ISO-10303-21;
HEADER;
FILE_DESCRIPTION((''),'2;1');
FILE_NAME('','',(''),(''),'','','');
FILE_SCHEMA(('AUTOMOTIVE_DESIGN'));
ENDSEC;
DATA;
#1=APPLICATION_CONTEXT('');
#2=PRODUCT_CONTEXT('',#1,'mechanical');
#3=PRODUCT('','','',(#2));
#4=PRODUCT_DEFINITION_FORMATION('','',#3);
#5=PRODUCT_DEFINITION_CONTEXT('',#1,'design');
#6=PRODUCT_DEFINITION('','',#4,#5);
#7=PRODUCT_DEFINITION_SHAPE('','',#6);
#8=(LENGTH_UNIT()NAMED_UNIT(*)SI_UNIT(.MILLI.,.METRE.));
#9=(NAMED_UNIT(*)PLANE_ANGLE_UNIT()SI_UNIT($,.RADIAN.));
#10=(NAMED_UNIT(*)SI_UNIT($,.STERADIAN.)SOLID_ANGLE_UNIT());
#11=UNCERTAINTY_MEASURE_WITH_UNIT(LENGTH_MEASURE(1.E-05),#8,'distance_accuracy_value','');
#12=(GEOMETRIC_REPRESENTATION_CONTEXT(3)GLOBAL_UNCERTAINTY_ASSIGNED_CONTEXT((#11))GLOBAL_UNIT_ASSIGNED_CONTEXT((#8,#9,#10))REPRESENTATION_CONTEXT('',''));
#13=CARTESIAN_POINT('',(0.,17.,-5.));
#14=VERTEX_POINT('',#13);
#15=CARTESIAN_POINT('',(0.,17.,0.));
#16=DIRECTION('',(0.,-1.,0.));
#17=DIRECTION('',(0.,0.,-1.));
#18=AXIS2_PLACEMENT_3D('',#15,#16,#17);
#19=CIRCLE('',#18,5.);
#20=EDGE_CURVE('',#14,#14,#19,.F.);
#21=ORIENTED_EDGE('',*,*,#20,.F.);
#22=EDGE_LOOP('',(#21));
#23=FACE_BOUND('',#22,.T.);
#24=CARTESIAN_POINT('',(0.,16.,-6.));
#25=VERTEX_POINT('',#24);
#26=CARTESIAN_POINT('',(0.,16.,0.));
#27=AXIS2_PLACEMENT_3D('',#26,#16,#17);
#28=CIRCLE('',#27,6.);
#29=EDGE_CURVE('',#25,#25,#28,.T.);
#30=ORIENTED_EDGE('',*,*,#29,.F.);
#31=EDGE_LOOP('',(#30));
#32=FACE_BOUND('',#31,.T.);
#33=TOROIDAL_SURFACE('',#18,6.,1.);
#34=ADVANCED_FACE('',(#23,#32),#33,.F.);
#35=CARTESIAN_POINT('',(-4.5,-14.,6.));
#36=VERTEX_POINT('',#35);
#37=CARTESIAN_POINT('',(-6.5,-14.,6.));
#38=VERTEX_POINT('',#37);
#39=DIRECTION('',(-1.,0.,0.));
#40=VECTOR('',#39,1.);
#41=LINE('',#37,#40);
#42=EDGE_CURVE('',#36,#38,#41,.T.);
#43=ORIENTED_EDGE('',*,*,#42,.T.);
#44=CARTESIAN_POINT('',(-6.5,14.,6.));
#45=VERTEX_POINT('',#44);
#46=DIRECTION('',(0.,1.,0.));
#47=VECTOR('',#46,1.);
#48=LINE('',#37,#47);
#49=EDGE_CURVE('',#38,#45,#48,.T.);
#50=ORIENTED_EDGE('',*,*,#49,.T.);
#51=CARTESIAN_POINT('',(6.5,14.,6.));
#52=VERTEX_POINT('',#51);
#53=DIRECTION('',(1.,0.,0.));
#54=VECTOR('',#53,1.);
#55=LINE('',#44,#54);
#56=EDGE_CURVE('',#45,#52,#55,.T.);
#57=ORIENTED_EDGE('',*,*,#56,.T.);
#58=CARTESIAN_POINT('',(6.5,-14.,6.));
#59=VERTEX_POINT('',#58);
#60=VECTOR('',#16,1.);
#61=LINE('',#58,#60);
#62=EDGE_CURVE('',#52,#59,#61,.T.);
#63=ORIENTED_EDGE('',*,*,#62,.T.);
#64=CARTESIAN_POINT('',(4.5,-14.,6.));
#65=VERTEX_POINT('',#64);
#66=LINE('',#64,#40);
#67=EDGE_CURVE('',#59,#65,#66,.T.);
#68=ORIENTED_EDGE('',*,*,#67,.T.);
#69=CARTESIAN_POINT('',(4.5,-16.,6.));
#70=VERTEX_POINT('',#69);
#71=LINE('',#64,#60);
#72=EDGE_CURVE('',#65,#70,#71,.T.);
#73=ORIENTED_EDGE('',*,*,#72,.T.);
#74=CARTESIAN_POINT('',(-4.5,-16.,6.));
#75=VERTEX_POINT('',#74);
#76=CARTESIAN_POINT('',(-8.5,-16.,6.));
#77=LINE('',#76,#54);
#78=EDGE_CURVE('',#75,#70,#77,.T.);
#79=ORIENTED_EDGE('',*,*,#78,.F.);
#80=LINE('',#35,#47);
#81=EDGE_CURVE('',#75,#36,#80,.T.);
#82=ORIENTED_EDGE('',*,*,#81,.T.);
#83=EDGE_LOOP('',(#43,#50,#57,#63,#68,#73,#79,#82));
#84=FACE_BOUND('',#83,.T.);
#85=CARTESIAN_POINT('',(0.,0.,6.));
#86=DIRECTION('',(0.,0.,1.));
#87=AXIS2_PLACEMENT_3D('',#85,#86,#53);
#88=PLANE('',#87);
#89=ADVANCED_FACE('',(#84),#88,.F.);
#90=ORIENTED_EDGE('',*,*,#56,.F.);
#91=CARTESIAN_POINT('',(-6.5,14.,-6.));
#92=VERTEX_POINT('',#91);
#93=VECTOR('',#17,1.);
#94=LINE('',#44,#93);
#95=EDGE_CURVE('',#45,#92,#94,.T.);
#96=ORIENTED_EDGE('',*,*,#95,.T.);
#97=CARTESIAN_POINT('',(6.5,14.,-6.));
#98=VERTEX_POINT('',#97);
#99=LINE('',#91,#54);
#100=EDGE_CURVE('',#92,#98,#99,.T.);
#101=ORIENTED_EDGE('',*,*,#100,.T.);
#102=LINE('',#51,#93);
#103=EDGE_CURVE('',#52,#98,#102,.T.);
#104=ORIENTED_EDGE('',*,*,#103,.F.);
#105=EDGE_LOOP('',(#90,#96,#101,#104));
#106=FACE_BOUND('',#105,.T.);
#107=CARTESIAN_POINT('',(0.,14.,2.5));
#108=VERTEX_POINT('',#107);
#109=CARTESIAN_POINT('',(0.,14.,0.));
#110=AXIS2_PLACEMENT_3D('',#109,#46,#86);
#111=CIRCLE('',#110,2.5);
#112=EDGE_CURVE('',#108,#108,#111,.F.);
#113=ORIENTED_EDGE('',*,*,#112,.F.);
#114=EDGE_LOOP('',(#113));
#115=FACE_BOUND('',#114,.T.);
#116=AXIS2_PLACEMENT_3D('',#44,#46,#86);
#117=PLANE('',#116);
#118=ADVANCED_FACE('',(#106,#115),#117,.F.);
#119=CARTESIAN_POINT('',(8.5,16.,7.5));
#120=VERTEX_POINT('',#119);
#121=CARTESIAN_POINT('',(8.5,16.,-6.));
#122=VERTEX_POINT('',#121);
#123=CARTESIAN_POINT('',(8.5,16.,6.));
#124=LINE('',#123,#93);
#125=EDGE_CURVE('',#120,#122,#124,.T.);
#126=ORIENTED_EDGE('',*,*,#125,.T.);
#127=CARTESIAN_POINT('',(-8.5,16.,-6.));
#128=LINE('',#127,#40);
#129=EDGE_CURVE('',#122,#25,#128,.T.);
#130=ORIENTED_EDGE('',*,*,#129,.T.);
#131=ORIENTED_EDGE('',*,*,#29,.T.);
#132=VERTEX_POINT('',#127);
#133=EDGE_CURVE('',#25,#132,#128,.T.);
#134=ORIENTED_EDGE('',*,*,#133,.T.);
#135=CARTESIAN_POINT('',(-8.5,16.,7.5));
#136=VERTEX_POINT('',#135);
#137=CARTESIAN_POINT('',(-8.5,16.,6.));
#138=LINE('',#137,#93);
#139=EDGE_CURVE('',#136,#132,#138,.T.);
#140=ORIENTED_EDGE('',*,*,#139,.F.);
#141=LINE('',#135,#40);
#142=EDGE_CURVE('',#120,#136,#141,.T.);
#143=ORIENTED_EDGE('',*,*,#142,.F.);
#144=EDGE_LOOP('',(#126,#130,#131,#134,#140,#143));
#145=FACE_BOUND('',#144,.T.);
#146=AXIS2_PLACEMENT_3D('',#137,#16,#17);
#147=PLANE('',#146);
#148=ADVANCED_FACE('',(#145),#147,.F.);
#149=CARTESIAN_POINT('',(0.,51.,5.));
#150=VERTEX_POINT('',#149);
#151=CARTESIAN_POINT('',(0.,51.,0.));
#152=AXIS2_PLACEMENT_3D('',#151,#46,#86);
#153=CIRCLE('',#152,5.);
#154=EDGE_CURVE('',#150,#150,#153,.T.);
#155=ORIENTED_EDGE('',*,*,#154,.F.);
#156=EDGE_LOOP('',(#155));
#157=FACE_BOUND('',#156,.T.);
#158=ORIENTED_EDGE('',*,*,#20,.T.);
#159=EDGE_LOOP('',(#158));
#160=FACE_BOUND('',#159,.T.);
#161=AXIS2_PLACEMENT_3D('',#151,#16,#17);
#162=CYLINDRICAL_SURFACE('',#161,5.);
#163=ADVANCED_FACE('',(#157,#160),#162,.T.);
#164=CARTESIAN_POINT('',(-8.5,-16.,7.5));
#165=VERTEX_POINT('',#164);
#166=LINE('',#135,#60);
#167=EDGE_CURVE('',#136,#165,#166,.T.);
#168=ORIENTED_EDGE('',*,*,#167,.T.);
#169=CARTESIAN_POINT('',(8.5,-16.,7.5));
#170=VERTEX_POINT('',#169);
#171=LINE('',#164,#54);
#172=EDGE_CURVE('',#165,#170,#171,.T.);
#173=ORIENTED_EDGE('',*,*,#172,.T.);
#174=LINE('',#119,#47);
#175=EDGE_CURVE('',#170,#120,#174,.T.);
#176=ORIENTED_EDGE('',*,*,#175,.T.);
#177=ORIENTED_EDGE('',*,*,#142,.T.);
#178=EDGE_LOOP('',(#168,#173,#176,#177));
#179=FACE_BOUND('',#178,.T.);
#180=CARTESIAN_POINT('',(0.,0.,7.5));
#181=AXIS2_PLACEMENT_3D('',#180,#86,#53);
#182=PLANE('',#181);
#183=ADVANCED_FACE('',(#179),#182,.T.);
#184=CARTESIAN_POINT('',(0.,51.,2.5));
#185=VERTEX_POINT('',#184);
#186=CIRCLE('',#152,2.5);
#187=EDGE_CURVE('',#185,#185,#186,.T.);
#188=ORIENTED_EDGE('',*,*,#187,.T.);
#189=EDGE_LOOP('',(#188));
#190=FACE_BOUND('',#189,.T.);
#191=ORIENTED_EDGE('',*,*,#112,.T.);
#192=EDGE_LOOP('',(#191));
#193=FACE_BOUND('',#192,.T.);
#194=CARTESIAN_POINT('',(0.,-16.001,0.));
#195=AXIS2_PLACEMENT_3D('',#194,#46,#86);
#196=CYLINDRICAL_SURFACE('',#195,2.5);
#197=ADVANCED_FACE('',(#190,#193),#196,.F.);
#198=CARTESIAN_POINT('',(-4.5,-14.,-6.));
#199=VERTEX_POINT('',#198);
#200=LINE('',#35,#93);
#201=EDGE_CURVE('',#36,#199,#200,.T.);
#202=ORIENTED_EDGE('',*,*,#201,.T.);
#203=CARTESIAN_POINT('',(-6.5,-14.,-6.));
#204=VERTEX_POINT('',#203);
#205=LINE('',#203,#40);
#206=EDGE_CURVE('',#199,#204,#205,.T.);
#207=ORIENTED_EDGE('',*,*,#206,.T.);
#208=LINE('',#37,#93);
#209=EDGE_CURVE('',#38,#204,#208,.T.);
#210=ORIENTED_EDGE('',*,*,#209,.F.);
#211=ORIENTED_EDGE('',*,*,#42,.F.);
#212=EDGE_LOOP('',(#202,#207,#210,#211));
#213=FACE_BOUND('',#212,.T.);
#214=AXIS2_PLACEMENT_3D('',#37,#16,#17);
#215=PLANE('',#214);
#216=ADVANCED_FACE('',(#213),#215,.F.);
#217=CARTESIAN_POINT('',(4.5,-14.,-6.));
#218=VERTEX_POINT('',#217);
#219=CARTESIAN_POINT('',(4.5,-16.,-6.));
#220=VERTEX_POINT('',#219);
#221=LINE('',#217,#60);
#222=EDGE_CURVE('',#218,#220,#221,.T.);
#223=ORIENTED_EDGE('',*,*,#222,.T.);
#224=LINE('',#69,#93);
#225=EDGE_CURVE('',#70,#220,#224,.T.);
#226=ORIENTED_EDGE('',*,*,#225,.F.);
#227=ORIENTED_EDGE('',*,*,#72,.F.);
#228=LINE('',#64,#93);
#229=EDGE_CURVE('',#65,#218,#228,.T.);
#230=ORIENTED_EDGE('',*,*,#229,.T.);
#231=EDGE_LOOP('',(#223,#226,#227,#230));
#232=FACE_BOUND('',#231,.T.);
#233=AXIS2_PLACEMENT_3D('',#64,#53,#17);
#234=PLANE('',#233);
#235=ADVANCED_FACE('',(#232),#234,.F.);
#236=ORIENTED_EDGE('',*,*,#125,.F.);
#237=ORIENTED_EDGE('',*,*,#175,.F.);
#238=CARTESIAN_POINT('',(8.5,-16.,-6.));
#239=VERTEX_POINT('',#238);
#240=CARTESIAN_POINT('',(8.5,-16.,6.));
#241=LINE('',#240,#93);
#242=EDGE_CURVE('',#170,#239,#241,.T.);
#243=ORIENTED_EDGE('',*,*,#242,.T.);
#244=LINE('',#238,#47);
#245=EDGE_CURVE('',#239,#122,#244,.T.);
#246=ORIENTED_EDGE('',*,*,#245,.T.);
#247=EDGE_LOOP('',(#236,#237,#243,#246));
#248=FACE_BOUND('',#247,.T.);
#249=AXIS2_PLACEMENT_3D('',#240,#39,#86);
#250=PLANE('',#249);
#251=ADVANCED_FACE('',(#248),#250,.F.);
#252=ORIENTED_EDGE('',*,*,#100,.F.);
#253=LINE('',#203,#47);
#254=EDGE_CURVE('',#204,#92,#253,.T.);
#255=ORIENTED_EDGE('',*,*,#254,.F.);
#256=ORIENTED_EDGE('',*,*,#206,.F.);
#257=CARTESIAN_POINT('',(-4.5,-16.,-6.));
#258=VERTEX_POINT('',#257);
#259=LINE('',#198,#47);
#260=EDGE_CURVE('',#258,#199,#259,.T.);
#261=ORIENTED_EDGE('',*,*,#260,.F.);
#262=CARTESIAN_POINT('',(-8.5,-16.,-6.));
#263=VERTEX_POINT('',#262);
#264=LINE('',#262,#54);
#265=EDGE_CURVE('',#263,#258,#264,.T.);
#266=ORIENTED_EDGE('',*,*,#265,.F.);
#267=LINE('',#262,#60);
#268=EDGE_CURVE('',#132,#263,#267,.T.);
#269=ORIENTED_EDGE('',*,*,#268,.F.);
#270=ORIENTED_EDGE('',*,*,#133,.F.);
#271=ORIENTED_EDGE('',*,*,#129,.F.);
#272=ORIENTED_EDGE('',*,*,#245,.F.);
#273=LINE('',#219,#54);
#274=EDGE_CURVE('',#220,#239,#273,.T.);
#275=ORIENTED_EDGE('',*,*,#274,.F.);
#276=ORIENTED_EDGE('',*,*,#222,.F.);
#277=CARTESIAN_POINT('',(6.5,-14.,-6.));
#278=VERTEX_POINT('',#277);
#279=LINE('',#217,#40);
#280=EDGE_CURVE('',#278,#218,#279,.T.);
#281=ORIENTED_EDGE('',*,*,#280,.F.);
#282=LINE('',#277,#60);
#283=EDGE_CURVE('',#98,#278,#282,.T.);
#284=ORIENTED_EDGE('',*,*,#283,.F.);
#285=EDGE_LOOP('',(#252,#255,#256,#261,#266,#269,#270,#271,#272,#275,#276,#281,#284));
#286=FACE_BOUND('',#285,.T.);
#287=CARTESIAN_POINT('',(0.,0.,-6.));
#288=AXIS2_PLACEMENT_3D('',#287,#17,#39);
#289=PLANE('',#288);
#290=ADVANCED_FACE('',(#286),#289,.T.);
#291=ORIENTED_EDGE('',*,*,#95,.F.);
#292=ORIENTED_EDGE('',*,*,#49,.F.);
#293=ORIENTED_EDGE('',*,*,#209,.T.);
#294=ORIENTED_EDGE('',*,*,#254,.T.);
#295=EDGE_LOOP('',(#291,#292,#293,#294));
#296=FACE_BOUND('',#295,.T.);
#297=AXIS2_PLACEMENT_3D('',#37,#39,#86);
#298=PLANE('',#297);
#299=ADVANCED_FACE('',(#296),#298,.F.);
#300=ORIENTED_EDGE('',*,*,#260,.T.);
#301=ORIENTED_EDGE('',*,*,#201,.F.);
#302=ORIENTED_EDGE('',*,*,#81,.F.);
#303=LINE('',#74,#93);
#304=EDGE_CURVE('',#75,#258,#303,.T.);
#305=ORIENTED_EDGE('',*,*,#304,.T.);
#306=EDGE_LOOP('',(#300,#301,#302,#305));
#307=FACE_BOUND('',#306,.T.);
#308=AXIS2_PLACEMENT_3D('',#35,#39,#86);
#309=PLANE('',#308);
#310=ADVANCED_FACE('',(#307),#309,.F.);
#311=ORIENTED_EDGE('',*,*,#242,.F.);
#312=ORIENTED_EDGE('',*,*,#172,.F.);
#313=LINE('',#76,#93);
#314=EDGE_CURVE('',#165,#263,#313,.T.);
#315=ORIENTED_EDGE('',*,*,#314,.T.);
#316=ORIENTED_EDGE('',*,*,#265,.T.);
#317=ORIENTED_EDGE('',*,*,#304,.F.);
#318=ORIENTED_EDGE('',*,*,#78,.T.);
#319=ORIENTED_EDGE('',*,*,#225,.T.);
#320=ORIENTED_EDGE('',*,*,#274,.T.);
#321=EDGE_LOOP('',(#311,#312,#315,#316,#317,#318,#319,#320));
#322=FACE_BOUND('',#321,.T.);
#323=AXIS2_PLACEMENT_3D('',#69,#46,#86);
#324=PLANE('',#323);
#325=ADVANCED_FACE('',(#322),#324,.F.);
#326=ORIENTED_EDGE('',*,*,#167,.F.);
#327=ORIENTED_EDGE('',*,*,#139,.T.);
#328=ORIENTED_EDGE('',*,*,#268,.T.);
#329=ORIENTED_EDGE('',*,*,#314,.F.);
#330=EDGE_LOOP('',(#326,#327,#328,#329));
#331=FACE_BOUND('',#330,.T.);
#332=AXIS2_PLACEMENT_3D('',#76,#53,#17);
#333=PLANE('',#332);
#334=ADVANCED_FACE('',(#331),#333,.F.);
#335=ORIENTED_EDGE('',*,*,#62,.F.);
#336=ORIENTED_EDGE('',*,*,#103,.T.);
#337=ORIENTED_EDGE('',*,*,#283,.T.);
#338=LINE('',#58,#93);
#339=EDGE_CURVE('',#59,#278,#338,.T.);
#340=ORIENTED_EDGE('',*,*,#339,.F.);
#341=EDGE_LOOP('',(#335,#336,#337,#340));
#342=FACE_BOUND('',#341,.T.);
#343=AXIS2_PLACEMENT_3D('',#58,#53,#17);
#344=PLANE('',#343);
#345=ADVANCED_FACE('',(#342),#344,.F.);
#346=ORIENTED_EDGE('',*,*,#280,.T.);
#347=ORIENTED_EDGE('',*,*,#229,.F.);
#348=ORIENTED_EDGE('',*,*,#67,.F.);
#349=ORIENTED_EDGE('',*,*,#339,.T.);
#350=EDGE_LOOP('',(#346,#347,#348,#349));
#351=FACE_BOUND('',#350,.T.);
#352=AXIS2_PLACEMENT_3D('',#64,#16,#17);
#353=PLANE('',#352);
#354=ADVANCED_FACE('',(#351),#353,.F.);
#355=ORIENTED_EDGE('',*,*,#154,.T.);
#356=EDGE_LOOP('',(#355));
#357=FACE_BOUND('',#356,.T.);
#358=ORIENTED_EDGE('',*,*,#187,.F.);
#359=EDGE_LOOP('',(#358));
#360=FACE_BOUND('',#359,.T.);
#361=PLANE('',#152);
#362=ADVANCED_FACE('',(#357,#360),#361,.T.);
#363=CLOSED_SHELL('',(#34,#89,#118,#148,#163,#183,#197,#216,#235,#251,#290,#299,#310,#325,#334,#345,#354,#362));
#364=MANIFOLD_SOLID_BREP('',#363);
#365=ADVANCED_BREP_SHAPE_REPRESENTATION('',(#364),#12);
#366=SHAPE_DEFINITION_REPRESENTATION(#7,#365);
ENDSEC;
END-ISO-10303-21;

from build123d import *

# Parameters (mm, degrees)
BOSS_EXTRUDE1_DEPTH = 6
SKETCH2_R           = 5
BOSS_EXTRUDE2_DEPTH = 35
FILLET1_R           = 1
SKETCH3_W           = 17
SKETCH3_H           = 32
BOSS_EXTRUDE3_DEPTH = 1.5
CUT_EXTRUDE1_REACH  = 69.952
SKETCH4_R           = 2.5


with BuildPart() as part:
    # Sketch1 → Boss-Extrude1 (new, symmetric)
    with BuildSketch(Plane.XY):
        Polygon((-6.5, -14), (-6.5, 14), (6.5, 14), (6.5, -14), (4.5, -14), (4.5, -16), (8.5, -16), (8.5, 16), (-8.5, 16), (-8.5, -16), (-4.5, -16), (-4.5, -14), align=None)
    extrude(amount=BOSS_EXTRUDE1_DEPTH, both=True)

    # Sketch2 → Boss-Extrude2 (add)
    with BuildSketch(Plane(origin=(0, 16, 0), x_dir=(1, 0, 0), z_dir=(0, 1, 0))):
        with Locations(Location((0, 0, 0), (0, 0, 270))):
            Circle(SKETCH2_R)
    extrude(amount=BOSS_EXTRUDE2_DEPTH)

    # Fillet1
    fillet1_edges = [part.edges().sort_by_distance(p)[0] for p in [
        (0, 16, -5),
    ]]
    fillet(fillet1_edges, radius=FILLET1_R - 0.0001)  # a hair under: the kernel refuses the full size

    # Sketch3 → Boss-Extrude3 (add)
    with BuildSketch(Plane.XY.offset(6)):
        Rectangle(SKETCH3_W, SKETCH3_H)
    extrude(amount=BOSS_EXTRUDE3_DEPTH)

    # Sketch4 → Cut-Extrude1 (cut, up to next)
    with BuildSketch(Plane(origin=(0, 51, 0), x_dir=(1, 0, 0), z_dir=(0, 1, 0)), mode=Mode.PRIVATE) as cut_extrude1_sk1:
        with Locations(Location((0, 0, 0), (0, 0, 270))):
            Circle(SKETCH4_R)
    cut_extrude1_tool1 = extrude(cut_extrude1_sk1.sketch, amount=-CUT_EXTRUDE1_REACH, mode=Mode.PRIVATE) & part.part
    add(cut_extrude1_tool1.solids().sort_by_distance((0, 51, 0))[0], mode=Mode.SUBTRACT)


solid = part.part
